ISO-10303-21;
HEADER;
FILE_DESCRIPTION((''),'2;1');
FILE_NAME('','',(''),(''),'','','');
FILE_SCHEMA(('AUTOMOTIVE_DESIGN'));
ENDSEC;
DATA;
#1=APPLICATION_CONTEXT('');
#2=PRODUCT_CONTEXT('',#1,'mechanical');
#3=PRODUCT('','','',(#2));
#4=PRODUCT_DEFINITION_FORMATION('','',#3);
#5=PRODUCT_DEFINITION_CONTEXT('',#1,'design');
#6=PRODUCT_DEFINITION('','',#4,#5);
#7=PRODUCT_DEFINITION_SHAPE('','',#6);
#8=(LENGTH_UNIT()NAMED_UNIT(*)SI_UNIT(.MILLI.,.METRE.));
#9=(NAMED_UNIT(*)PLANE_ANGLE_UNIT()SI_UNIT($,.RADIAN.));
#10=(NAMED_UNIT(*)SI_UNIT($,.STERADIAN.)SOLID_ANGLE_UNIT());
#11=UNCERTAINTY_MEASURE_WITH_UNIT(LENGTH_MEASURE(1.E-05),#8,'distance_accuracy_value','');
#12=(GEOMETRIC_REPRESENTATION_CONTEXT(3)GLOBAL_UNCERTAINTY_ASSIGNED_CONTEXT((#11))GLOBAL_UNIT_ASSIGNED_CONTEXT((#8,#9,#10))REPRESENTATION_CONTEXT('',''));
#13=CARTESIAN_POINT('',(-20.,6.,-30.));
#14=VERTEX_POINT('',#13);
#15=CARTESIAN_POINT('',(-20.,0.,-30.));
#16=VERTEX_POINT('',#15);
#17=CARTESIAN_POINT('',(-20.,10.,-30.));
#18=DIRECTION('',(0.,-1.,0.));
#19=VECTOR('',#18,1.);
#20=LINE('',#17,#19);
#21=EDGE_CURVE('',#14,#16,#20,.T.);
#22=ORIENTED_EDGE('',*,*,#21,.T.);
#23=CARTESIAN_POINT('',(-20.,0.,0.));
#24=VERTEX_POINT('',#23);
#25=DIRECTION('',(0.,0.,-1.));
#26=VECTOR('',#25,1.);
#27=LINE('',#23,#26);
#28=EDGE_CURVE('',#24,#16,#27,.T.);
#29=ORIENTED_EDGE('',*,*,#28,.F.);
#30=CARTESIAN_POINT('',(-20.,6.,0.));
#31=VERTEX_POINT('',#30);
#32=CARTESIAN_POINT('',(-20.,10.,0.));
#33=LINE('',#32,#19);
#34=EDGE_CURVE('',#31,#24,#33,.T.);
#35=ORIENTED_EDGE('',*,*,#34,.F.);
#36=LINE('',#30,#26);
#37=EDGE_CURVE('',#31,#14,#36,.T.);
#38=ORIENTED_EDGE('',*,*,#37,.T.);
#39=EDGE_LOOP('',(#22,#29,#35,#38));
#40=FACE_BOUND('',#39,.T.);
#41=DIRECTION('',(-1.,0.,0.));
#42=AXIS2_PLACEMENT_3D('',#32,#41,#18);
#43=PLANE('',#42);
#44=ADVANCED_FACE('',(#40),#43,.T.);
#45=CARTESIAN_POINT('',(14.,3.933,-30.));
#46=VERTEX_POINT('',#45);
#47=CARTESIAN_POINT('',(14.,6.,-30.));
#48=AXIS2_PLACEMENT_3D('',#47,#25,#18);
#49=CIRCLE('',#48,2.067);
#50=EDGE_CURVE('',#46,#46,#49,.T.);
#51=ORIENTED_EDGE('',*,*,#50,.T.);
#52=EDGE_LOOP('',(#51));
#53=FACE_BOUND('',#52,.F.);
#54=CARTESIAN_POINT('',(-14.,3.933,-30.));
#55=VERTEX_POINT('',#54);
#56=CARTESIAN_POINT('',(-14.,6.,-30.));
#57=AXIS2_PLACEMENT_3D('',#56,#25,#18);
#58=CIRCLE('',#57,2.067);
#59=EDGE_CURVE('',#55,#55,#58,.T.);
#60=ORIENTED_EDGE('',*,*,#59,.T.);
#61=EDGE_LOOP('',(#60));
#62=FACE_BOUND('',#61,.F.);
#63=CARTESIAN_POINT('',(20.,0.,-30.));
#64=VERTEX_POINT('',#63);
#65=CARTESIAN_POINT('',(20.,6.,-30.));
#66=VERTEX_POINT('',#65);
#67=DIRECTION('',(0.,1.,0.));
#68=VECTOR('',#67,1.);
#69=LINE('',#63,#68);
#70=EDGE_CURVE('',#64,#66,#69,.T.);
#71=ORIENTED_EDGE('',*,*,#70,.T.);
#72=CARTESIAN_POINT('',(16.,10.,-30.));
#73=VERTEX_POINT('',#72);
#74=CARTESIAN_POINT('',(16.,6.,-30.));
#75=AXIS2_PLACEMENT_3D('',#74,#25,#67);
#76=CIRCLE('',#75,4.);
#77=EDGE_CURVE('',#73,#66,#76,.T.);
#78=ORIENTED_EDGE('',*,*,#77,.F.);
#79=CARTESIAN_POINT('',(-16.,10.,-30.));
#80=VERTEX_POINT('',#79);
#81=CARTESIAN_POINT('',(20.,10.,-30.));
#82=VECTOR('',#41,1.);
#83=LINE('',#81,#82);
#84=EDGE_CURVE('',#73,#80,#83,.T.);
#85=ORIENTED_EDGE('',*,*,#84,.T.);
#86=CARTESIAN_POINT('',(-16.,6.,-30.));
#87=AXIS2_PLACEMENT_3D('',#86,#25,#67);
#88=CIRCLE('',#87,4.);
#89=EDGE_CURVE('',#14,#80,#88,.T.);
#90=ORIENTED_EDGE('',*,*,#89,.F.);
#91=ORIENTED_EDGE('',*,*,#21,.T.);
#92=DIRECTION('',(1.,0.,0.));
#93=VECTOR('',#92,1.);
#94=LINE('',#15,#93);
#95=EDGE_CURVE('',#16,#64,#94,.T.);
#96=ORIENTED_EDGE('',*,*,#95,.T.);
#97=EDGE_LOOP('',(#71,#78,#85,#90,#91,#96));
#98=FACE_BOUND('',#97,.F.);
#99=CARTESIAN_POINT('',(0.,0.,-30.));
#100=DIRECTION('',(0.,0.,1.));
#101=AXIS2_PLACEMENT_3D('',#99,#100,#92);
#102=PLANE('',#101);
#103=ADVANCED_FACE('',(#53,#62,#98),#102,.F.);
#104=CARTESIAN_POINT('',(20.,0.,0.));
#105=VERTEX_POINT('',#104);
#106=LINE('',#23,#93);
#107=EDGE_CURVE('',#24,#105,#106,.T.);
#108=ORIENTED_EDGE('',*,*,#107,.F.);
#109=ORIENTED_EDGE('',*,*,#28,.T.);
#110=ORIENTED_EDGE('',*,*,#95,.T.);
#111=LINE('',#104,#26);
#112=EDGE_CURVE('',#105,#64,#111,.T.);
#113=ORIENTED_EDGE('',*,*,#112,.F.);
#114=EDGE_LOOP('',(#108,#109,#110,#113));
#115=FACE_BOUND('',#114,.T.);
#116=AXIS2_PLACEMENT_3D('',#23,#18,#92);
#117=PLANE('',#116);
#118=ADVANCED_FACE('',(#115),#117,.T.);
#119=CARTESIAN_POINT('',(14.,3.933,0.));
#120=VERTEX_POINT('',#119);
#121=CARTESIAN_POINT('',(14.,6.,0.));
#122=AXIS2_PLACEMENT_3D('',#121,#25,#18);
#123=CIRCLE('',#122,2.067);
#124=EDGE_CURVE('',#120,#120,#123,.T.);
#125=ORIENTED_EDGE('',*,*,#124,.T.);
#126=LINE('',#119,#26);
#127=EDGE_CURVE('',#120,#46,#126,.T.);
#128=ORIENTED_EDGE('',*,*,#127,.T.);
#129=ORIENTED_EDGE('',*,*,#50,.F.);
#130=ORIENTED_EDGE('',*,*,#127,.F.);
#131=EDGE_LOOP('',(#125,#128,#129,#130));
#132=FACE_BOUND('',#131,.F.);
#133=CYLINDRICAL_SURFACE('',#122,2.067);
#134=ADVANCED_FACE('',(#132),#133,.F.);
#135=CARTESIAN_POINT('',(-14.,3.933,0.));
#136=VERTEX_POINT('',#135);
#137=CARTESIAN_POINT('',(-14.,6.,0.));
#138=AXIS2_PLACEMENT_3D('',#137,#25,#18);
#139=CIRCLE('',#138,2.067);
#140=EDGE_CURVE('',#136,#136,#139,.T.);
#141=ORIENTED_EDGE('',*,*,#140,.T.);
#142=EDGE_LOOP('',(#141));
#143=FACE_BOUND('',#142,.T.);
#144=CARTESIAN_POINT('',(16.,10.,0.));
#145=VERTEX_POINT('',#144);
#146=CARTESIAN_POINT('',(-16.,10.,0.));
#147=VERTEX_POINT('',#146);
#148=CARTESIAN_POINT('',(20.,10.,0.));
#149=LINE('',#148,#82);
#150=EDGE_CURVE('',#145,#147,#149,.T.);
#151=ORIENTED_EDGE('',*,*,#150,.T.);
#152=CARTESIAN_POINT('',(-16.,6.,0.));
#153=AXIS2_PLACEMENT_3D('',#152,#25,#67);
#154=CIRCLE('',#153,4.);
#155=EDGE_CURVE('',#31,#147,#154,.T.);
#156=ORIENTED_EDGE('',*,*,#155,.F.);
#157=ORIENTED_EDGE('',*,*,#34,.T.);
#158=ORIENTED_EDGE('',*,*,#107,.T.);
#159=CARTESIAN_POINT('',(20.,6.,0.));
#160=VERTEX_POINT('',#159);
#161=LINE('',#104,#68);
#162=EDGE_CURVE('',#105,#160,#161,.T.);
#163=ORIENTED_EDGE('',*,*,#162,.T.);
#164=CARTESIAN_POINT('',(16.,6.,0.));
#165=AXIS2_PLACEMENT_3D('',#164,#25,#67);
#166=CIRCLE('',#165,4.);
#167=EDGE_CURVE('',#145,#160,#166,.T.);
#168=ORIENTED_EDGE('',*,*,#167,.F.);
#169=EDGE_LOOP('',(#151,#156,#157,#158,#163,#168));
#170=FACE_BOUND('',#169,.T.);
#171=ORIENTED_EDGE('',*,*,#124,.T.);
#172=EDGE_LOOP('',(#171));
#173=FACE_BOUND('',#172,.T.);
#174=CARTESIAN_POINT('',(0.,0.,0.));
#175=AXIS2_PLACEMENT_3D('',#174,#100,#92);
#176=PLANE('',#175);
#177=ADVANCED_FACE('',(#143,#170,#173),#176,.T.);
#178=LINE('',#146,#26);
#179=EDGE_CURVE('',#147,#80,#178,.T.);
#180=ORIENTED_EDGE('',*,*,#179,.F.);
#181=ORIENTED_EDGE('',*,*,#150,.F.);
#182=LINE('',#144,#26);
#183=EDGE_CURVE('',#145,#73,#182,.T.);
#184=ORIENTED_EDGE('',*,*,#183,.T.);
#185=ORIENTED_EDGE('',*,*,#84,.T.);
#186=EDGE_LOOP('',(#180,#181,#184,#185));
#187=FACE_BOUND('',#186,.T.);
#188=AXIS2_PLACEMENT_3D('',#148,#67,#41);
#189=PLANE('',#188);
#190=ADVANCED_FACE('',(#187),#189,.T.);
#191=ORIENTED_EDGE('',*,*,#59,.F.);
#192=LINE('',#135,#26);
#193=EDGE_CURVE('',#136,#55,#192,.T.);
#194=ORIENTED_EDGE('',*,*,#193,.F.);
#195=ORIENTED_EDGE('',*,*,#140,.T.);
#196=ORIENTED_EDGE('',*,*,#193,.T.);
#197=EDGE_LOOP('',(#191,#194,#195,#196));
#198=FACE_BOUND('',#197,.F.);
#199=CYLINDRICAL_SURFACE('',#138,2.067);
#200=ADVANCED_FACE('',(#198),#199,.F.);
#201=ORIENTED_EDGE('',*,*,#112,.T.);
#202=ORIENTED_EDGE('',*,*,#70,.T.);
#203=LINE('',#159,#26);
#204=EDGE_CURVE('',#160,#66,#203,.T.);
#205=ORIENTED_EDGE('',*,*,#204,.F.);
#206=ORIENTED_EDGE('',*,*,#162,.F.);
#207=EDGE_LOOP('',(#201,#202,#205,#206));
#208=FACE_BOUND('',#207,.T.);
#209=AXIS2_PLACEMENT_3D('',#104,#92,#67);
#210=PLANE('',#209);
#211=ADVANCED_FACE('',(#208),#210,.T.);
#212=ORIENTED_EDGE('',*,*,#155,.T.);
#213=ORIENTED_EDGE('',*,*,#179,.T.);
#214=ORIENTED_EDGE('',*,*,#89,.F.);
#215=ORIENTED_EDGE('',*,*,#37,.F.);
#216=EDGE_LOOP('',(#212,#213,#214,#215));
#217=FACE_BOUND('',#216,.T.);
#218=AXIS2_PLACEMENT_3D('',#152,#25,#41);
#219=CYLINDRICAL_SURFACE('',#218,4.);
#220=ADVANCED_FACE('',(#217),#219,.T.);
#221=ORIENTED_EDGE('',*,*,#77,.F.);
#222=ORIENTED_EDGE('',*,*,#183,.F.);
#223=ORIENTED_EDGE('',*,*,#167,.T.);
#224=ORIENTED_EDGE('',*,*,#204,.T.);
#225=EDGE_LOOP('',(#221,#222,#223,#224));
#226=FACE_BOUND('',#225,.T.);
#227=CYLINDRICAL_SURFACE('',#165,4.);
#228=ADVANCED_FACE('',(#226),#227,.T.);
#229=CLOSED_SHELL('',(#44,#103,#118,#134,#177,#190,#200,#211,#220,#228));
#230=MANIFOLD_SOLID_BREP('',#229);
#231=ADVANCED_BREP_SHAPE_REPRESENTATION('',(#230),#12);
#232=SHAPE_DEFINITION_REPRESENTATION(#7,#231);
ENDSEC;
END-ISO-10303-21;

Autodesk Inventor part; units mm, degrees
ref_plane "YZ Plane" through (0, 0, 0) normal (1, 0, 0) x (0, 1, 0)
ref_plane "XZ Plane" through (0, 0, 0) normal (0, 1, 0) x (-1, 0, 0)
ref_plane "XY Plane" through (0, 0, 0) normal (0, 0, 1) x (1, 0, 0)
sketch "Sketch1" plane through (0, 0, 0) normal (0, 0, 1) x (1, 0, 0)
  line L0 (-20, 0) -> (20, 0)
  line L1 (20, 0) -> (20, 10)
  line L2 (20, 10) -> (-20, 10)
  line L3 (-20, 10) -> (-20, 0)
  point P0 (0, 0)
  point P1 (0, 0)
  dimension "d0" = 40
  dimension "d1" = 10
extrude "Extrusion1" add sketch "Sketch1" against normal blind 30
fillet "Fillet1" radius 4 2 edges at (20, 10, -15) (-20, 10, -15)
sketch "Sketch2" plane through (0, 0, 0) normal (0, 0, 1) x (1, 0, 0)
  arc A0 (-16, 10) -> (-20, 6) centre (-16, 6) ccw projected
  line L0 (-20, 6) -> (-20, 0) projected
  line L1 (-20, 0) -> (20, 0) projected
  line L2 (20, 0) -> (20, 6) projected
  arc A1 (20, 6) -> (16, 10) centre (16, 6) ccw projected
  line L3 (16, 10) -> (-16, 10) projected
  line L4 (-20, 0) -> (20, 0) projected
  point P0 (0, 0)
  point P1 (-14, 6)
  point P2 (14, 6)
  point P3 (0, 0)
  dimension "d12" = 28
  dimension "d13" = 14
hole "Hole1" at (-14, 6, 0) at (14, 6, 0) direction (0, 0, -1) diameter 4.134 depth 30 thread size "M5x0.8" class "6H" standard "ISO Metric profile"
equation "\"d13\" = 0.5 * d12"
properties part number "02A" material "Aluminum 6061"
